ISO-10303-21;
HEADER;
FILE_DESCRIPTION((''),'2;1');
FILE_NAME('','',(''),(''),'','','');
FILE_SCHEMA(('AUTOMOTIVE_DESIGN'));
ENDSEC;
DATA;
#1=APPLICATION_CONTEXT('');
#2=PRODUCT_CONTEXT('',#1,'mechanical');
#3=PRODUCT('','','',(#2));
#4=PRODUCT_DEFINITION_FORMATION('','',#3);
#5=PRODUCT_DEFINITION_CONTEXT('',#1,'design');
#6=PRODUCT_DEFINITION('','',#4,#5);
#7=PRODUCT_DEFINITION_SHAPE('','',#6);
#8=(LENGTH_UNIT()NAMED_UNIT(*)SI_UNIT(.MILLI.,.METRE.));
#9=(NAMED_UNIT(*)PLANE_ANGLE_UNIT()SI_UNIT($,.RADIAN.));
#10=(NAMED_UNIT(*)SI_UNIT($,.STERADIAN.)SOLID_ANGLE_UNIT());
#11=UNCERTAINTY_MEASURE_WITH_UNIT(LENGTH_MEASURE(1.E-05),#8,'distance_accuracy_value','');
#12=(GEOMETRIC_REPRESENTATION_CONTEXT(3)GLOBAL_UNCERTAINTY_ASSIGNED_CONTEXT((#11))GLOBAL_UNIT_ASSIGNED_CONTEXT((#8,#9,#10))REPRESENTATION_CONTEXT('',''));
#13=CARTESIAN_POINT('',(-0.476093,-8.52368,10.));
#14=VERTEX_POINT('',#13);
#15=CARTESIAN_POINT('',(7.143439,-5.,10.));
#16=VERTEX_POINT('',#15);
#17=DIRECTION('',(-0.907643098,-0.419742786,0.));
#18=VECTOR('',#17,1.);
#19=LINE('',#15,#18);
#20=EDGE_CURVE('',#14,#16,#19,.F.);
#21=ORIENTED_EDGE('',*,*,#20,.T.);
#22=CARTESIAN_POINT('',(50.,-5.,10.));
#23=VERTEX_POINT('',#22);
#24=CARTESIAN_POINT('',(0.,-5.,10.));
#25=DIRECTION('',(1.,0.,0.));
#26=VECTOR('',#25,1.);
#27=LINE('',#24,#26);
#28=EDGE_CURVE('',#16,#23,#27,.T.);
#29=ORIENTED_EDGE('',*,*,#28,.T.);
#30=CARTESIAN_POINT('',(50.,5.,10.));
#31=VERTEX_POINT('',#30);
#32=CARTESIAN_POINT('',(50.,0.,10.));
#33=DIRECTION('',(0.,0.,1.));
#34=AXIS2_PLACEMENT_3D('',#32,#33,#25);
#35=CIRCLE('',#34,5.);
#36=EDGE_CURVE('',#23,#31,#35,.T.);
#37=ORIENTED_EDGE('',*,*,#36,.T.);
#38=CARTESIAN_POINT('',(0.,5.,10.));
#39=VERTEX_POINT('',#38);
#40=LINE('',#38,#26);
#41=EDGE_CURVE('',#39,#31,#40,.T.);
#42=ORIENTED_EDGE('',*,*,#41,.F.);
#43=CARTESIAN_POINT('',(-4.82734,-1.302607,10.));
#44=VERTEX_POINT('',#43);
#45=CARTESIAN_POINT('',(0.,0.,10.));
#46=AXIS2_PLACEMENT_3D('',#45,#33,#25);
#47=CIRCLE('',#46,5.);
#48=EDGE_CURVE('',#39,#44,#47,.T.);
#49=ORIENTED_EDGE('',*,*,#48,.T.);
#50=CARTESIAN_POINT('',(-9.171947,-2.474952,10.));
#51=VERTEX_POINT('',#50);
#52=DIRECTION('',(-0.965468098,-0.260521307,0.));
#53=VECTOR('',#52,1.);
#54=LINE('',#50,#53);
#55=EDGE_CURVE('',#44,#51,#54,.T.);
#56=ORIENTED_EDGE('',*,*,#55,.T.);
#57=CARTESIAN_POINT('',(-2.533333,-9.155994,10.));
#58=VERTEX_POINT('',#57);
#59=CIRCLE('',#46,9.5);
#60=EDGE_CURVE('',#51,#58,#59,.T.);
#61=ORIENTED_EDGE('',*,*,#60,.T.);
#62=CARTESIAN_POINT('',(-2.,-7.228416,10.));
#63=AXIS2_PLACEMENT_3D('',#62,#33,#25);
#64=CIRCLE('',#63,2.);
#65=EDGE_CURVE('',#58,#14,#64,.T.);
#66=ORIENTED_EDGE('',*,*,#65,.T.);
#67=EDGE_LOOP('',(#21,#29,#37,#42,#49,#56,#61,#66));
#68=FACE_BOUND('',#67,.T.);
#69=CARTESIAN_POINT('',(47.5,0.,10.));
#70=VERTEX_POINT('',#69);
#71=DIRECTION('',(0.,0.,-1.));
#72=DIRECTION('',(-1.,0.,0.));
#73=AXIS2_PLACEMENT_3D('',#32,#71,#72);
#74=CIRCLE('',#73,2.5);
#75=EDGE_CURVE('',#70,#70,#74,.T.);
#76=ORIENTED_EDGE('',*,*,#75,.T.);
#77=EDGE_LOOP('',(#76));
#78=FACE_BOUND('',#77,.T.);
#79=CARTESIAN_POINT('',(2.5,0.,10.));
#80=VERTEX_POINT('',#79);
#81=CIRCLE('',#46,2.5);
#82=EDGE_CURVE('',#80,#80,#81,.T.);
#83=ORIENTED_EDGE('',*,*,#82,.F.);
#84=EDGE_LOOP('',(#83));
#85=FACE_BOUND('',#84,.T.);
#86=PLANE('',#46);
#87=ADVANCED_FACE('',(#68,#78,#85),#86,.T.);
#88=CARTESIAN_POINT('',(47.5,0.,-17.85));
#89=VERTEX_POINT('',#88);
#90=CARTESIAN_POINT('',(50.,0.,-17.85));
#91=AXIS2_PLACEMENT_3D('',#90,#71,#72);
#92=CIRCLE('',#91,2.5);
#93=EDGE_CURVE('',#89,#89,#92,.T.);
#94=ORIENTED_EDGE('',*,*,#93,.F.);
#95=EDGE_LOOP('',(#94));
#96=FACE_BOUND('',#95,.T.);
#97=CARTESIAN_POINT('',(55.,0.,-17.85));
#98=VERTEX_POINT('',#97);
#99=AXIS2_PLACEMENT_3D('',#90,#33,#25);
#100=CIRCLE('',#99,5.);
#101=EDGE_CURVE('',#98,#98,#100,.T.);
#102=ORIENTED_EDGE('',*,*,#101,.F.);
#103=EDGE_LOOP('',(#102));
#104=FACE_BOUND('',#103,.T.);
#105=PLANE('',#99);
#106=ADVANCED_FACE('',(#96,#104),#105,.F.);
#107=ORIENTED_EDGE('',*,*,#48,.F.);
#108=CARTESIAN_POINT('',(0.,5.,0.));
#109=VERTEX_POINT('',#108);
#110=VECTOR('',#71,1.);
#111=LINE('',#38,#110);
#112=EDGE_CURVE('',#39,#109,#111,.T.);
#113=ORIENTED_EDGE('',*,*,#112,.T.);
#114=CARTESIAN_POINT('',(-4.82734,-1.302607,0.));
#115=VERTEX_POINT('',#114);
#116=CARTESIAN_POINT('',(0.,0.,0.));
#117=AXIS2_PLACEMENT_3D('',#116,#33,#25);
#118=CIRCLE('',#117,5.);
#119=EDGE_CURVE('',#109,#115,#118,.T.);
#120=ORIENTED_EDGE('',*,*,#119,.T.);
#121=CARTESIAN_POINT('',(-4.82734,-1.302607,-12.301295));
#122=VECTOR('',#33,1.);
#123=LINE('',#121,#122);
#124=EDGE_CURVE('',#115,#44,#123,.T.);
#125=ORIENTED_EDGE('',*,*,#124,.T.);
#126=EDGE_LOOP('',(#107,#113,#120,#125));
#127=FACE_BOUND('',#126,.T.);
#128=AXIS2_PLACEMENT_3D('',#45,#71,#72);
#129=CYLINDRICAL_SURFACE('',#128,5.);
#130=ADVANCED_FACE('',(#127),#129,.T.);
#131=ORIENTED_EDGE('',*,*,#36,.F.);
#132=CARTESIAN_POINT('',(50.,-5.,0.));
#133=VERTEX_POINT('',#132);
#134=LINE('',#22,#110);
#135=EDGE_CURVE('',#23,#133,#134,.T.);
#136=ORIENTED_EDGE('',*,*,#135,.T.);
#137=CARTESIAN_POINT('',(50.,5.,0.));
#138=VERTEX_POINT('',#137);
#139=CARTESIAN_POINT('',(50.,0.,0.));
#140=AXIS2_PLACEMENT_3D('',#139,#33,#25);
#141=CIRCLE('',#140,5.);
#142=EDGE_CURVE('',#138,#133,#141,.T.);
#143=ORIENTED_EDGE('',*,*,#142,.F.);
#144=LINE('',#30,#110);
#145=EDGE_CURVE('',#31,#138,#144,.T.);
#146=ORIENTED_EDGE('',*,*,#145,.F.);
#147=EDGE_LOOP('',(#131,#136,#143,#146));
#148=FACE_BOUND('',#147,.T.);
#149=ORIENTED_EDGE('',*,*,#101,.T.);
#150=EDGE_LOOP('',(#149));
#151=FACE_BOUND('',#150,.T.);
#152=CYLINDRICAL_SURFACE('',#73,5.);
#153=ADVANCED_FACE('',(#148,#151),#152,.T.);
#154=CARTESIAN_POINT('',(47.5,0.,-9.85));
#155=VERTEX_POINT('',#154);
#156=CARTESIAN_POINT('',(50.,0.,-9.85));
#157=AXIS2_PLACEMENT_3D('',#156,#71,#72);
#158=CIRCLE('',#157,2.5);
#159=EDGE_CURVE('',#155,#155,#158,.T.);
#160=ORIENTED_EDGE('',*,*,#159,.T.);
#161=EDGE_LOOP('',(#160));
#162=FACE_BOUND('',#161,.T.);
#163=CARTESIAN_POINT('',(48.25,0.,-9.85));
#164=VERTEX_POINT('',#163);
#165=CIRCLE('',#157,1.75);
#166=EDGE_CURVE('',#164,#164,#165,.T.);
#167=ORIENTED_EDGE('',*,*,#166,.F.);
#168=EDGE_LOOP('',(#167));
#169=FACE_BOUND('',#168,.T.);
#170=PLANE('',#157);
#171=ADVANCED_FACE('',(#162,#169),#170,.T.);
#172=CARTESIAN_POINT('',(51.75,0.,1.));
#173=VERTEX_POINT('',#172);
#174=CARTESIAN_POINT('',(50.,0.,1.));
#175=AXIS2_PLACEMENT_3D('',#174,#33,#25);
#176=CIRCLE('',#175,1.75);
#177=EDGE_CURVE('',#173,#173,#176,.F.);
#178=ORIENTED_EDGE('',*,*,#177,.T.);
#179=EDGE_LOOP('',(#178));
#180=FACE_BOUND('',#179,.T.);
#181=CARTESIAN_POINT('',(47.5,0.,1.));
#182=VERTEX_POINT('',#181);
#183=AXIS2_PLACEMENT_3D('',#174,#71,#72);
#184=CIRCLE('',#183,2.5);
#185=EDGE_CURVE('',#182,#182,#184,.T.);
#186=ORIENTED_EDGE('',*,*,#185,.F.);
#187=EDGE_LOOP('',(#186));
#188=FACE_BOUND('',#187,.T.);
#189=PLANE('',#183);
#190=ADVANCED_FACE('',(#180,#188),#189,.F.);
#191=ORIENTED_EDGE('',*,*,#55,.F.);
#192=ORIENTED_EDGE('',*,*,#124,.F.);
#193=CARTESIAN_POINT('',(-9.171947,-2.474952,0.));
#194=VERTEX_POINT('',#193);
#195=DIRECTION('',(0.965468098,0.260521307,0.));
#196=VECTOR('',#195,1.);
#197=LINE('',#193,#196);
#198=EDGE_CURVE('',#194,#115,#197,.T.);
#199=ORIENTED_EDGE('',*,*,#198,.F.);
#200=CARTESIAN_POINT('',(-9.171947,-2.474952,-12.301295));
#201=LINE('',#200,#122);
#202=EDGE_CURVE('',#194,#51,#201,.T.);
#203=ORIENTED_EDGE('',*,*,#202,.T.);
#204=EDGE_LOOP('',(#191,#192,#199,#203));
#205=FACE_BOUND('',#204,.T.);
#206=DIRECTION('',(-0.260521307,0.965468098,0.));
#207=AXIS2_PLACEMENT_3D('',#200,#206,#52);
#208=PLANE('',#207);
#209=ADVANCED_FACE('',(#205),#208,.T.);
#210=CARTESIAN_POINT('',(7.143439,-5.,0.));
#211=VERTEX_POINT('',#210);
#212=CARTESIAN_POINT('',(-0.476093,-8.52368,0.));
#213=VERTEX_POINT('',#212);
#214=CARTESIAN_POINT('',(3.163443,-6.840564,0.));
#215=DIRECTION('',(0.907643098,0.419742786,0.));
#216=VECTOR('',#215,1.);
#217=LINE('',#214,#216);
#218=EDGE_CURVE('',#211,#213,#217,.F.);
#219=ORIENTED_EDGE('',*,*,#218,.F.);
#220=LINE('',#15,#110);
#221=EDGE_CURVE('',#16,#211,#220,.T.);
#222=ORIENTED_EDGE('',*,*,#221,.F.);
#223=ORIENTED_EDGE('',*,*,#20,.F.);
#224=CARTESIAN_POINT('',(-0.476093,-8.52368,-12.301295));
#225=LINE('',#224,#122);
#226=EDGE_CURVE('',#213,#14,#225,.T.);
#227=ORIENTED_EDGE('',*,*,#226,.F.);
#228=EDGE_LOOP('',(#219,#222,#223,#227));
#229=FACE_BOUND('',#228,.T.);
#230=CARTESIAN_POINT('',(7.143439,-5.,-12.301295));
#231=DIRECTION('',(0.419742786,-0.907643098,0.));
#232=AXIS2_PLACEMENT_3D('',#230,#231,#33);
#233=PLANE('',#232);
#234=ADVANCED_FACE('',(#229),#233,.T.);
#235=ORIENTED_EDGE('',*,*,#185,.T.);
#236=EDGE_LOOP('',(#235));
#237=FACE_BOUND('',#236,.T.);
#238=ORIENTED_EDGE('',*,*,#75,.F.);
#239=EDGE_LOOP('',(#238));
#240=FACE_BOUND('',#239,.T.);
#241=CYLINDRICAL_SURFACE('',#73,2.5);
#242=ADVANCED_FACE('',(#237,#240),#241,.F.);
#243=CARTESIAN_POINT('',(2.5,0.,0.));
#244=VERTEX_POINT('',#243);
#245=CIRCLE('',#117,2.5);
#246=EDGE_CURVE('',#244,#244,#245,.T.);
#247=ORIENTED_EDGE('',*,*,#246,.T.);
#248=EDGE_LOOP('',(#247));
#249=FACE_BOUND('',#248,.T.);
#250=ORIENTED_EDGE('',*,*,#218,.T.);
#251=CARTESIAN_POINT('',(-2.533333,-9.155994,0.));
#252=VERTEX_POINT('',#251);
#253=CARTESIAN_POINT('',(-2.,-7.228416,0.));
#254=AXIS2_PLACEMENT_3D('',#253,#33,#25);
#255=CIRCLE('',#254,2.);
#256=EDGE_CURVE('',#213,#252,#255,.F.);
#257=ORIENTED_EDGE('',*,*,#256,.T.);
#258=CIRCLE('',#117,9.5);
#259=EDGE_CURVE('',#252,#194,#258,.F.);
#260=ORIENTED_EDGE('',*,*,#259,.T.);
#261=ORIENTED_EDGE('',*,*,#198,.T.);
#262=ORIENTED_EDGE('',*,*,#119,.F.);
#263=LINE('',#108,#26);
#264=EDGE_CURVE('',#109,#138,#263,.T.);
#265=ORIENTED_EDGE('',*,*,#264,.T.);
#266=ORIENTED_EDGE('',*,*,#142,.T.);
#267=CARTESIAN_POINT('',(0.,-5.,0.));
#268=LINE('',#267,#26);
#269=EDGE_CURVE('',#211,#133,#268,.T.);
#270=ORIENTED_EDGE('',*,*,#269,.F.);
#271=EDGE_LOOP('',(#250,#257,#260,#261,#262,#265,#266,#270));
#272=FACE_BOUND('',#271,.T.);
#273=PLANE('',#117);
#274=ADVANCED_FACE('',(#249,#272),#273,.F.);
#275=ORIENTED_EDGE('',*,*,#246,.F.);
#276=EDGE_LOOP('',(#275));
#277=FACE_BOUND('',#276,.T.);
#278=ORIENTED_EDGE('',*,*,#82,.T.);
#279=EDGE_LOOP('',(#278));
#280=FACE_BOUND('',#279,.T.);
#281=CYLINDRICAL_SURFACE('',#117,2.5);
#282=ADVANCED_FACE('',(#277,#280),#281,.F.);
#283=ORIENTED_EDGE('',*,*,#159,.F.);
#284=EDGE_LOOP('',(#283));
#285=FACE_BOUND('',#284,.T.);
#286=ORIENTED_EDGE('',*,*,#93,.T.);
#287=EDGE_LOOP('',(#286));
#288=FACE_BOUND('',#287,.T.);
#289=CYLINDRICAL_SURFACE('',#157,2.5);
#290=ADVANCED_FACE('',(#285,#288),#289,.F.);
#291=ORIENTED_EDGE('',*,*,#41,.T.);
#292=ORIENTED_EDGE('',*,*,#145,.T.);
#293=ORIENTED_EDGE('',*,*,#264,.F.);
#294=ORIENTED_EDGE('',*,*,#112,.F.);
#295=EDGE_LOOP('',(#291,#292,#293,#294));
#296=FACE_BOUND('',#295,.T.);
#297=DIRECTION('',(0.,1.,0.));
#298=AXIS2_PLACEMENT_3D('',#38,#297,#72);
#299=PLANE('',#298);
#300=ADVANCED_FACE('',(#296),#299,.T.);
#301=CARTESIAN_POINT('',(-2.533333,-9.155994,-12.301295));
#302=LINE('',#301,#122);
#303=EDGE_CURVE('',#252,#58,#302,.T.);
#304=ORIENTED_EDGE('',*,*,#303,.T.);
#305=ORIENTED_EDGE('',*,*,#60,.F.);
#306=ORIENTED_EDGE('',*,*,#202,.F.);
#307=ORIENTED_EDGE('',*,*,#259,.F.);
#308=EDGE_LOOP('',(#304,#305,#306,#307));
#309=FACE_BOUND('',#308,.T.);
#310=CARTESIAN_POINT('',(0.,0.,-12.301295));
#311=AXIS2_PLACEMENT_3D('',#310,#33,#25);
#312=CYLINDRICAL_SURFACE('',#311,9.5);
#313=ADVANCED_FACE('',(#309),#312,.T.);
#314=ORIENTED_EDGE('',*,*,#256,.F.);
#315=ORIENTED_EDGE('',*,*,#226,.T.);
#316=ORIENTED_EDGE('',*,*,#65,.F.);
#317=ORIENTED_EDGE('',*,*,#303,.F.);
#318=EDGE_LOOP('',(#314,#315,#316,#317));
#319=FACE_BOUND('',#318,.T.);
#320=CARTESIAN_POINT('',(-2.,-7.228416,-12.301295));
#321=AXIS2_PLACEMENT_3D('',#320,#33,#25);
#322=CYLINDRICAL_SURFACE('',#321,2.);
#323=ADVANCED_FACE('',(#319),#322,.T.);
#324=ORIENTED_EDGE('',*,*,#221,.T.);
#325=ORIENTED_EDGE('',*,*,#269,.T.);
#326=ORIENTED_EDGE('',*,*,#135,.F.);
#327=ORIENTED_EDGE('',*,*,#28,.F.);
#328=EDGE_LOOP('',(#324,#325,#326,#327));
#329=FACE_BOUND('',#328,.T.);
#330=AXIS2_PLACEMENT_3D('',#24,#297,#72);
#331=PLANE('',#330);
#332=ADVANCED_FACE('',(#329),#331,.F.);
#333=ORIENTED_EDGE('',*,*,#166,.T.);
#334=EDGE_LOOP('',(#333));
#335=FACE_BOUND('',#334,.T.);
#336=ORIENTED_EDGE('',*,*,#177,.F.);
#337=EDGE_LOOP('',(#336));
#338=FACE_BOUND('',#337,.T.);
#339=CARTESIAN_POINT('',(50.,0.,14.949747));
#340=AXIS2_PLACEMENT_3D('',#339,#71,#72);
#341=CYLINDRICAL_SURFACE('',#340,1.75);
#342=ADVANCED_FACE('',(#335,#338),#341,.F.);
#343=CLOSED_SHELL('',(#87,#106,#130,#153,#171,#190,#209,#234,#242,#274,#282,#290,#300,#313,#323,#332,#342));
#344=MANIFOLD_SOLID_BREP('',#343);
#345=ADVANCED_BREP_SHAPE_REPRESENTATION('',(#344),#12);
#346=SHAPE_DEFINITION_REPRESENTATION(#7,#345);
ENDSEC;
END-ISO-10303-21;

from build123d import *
from build123d.topology import SkipClean

# Parameters (mm, degrees)
EXTRUDE_1_DEPTH     = 10
SKETCH_2_R          = 2.500000000000002
SKETCH_2_R_2        = 2.5
CUT_EXTRUDE_1_DEPTH = 10
EXTRUDE_START       = -27.850000000000005
SKETCH_4_R          = 4.999999999999997
EXTRUDE_2_DEPTH     = 27.850000000000005
EXTRUDE_START_2     = -10
EXTRUDE_3_DEPTH     = 10
FILLET_1_R          = 2
CHAMFER_START       = 4
CHAMFER_1_OUTLINE_W = 8.394855713999998
CHAMFER_1_OUTLINE_H = 10
CHAMFER_1_DEPTH     = 3.536622653
SKETCH_6_R          = 2.500000000000002
CUT_EXTRUDE_2_DEPTH = 8
SKETCH_8_R          = 1.7500000000000036
CUT_EXTRUDE_4_DEPTH = 10.85
SKETCH_9_R          = 2.500000000000002
CUT_EXTRUDE_5_DEPTH = 9
CUT_EXTRUDE_START   = -3
CUT_EXTRUDE_6_DEPTH = 4
FILLET_2_R          = 1
EXTRUDE_START_3     = 4
EXTRUDE_4_DEPTH     = 4
SKETCH_12_R         = 2.5
EXTRUDE_5_DEPTH     = 4


with BuildPart() as part:
    # 草图1 → 凸台-拉伸1 (new body)
    with BuildSketch(Plane.XY):
        with BuildLine():
            Line((0, 5), (50, 5.000000000000001))
            ThreePointArc((50, 5.000000000000001), (55, 0), (50, -4.999999999999997))
            Line((50, -4.999999999999997), (0, -5))
            ThreePointArc((0, -5), (-5, 6.1e-16), (0, 5))
        make_face()
    extrude(amount=EXTRUDE_1_DEPTH)

    # 草图2 → 切除-拉伸1 (cut)
    with BuildSketch(Plane.XY.offset(10)):
        with Locations((50, 0)):
            Circle(SKETCH_2_R)
        Circle(SKETCH_2_R_2)
    extrude(amount=-CUT_EXTRUDE_1_DEPTH, mode=Mode.SUBTRACT)

    # 草图4 → 凸台-拉伸2 (add)
    with SkipClean():  # the faces are left unmerged after this step: merging them gives an invalid solid
        with BuildSketch(Plane.XY.offset(10).offset(EXTRUDE_START)):
            with Locations(Location((50, 0, 0), (0, 0, 270))):
                Circle(SKETCH_4_R)
        extrude(amount=EXTRUDE_2_DEPTH)

    # 草图5 → 凸台-拉伸3 (add)
    with SkipClean():  # the faces are left unmerged after this step: merging them gives an invalid solid
        with BuildSketch(Plane.XY.offset(10).offset(EXTRUDE_START_2)):
            with BuildLine():
                Line((-9.171946933133274, -2.4749524148530857), (-4.827340491122777, -1.3026065341332034))
                ThreePointArc((-4.827340491122777, -1.3026065341332034), (-3.0403097974823012, -3.9694478627805583), (5.411e-14, -5))
                Line((5.411e-14, -5), (1.028e-13, -9.5))
                ThreePointArc((1.028e-13, -9.5), (-5.7765886152163715, -7.541950939283059), (-9.171946933133274, -2.4749524148530857))
            make_face()
        extrude(amount=EXTRUDE_3_DEPTH)

    # 圆角1
    fillet_1_edges = [part.edges().sort_by_distance(p)[0] for p in [
        (1.028e-13, -9.5, 5),
    ]]
    fillet(fillet_1_edges, radius=FILLET_1_R)

    # 倒角1: read off the stored shape, not the designer's step
    # 倒角1 outline → 倒角1 (add)
    with BuildSketch(Plane(origin=(0, 0, 0), x_dir=(0.9076430982816491, 0.41974278569343915, 0), z_dir=(0.41974278569343915, -0.9076430982816494, 0)).offset(CHAMFER_START)):
        with Locations((0.18755170199999993, 5)):
            Rectangle(CHAMFER_1_OUTLINE_W, CHAMFER_1_OUTLINE_H)
    extrude(amount=CHAMFER_1_DEPTH)

    # 草图6 → 切除-拉伸2 (cut)
    with BuildSketch(Plane(origin=(0, 0, -17.850000000000005), x_dir=(-1, 0, 0), z_dir=(0, 0, -1))):
        with Locations((-50, 0)):
            Circle(SKETCH_6_R)
    extrude(amount=-CUT_EXTRUDE_2_DEPTH, mode=Mode.SUBTRACT)

    # 草图8 → 切除-拉伸4 (cut)
    with BuildSketch(Plane(origin=(0, 0, -9.850000000000005), x_dir=(-1, 0, 0), z_dir=(0, 0, -1))):
        with Locations((-50, 0)):
            Circle(SKETCH_8_R)
    extrude(amount=-CUT_EXTRUDE_4_DEPTH, mode=Mode.SUBTRACT)

    # 草图9 → 切除-拉伸5 (cut)
    with BuildSketch(Plane(origin=(0, 0, 1.0000000000000009), x_dir=(-1, 0, 0), z_dir=(0, 0, -1))):
        with Locations((-50, 0)):
            Circle(SKETCH_9_R)
    extrude(amount=-CUT_EXTRUDE_5_DEPTH, mode=Mode.SUBTRACT)

    # 草图10 → 切除-拉伸6 (cut)
    with BuildSketch(Plane(origin=(0, 0, 0), x_dir=(-1, 0, 0), z_dir=(0, 0, -1)).offset(CUT_EXTRUDE_START)):
        with BuildLine():
            Line((3.5355339059327444, -3.535533905932731), (6.717514421272216, -6.717514421272188))
            ThreePointArc((6.717514421272216, -6.717514421272188), (8.223051661510107, -4.757249349375738), (9.171946933133274, -2.474952414853084))
            Line((9.171946933133274, -2.474952414853084), (4.827340491122777, -1.3026065341332023))
            ThreePointArc((4.827340491122777, -1.3026065341332023), (-4.327921927110582, 2.503815447039863), (3.5355339059327444, -3.535533905932731))
        make_face()
    extrude(amount=-CUT_EXTRUDE_6_DEPTH, mode=Mode.SUBTRACT)

    # 圆角2
    fillet_2_edges = [part.edges().sort_by_distance(p)[0] for p in [
        (-3.1e-16, 5, 5),
    ]]
    fillet(fillet_2_edges, radius=FILLET_2_R)

    # 草图11 → 凸台-拉伸4 (add)
    with BuildSketch(Plane(origin=(0, 0, 7), x_dir=(-1, 0, 0), z_dir=(0, 0, -1)).offset(EXTRUDE_START_3)):
        with BuildLine():
            Line((8.197358015291606, -4.801387462925119), (3.5463669464222503, -3.5463669464222334))
            Line((3.5463669464222494, -3.5463669464222356), (6.717514421272216, -6.717514421272188))
            ThreePointArc((6.717514421272217, -6.71751442127219), (7.518725994466674, -5.8067856357998195), (8.197358015291606, -4.801387462925119))
        make_face()
    extrude(amount=-EXTRUDE_4_DEPTH)

    # 草图12 → 凸台-拉伸5 (add)
    with BuildSketch(Plane(origin=(0, 0, 7), x_dir=(-1, 0, 0), z_dir=(0, 0, -1)).offset(EXTRUDE_START_3)):
        with BuildLine():
            Line((3.546366946422246, -3.546366946422232), (8.197358015291606, -4.80138746292512))
            ThreePointArc((8.197358015291606, -4.80138746292512), (8.762206548927544, -3.6706588501155046), (9.171946933133276, -2.474952414853084))
            Line((9.171946933133276, -2.474952414853084), (4.827340491122777, -1.3026065341332018))
            ThreePointArc((4.827340491122777, -1.3026065341332018), (3.9694478627805414, 3.040309797482321), (3.1e-16, 5))
            Line((3.1e-16, 5), (-4.47213595499958, 5))
            ThreePointArc((-4.47213595499958, 5), (-3.5592650258243026, 4.408248290463862), (-3.7267799624996503, 3.333333333333333))
            ThreePointArc((-3.7267799624996503, 3.333333333333333), (-3.4357645511885355, -3.6325641011269494), (3.535533905932743, -3.5355339059327324))
            Line((3.535533905932743, -3.5355339059327324), (3.546366946422246, -3.546366946422232))
        make_face()
        with Locations(Location((0, 0, 0), (0, 0, 180))):
            Circle(SKETCH_12_R, mode=Mode.SUBTRACT)
    extrude(amount=-EXTRUDE_5_DEPTH)


solid = part.part
